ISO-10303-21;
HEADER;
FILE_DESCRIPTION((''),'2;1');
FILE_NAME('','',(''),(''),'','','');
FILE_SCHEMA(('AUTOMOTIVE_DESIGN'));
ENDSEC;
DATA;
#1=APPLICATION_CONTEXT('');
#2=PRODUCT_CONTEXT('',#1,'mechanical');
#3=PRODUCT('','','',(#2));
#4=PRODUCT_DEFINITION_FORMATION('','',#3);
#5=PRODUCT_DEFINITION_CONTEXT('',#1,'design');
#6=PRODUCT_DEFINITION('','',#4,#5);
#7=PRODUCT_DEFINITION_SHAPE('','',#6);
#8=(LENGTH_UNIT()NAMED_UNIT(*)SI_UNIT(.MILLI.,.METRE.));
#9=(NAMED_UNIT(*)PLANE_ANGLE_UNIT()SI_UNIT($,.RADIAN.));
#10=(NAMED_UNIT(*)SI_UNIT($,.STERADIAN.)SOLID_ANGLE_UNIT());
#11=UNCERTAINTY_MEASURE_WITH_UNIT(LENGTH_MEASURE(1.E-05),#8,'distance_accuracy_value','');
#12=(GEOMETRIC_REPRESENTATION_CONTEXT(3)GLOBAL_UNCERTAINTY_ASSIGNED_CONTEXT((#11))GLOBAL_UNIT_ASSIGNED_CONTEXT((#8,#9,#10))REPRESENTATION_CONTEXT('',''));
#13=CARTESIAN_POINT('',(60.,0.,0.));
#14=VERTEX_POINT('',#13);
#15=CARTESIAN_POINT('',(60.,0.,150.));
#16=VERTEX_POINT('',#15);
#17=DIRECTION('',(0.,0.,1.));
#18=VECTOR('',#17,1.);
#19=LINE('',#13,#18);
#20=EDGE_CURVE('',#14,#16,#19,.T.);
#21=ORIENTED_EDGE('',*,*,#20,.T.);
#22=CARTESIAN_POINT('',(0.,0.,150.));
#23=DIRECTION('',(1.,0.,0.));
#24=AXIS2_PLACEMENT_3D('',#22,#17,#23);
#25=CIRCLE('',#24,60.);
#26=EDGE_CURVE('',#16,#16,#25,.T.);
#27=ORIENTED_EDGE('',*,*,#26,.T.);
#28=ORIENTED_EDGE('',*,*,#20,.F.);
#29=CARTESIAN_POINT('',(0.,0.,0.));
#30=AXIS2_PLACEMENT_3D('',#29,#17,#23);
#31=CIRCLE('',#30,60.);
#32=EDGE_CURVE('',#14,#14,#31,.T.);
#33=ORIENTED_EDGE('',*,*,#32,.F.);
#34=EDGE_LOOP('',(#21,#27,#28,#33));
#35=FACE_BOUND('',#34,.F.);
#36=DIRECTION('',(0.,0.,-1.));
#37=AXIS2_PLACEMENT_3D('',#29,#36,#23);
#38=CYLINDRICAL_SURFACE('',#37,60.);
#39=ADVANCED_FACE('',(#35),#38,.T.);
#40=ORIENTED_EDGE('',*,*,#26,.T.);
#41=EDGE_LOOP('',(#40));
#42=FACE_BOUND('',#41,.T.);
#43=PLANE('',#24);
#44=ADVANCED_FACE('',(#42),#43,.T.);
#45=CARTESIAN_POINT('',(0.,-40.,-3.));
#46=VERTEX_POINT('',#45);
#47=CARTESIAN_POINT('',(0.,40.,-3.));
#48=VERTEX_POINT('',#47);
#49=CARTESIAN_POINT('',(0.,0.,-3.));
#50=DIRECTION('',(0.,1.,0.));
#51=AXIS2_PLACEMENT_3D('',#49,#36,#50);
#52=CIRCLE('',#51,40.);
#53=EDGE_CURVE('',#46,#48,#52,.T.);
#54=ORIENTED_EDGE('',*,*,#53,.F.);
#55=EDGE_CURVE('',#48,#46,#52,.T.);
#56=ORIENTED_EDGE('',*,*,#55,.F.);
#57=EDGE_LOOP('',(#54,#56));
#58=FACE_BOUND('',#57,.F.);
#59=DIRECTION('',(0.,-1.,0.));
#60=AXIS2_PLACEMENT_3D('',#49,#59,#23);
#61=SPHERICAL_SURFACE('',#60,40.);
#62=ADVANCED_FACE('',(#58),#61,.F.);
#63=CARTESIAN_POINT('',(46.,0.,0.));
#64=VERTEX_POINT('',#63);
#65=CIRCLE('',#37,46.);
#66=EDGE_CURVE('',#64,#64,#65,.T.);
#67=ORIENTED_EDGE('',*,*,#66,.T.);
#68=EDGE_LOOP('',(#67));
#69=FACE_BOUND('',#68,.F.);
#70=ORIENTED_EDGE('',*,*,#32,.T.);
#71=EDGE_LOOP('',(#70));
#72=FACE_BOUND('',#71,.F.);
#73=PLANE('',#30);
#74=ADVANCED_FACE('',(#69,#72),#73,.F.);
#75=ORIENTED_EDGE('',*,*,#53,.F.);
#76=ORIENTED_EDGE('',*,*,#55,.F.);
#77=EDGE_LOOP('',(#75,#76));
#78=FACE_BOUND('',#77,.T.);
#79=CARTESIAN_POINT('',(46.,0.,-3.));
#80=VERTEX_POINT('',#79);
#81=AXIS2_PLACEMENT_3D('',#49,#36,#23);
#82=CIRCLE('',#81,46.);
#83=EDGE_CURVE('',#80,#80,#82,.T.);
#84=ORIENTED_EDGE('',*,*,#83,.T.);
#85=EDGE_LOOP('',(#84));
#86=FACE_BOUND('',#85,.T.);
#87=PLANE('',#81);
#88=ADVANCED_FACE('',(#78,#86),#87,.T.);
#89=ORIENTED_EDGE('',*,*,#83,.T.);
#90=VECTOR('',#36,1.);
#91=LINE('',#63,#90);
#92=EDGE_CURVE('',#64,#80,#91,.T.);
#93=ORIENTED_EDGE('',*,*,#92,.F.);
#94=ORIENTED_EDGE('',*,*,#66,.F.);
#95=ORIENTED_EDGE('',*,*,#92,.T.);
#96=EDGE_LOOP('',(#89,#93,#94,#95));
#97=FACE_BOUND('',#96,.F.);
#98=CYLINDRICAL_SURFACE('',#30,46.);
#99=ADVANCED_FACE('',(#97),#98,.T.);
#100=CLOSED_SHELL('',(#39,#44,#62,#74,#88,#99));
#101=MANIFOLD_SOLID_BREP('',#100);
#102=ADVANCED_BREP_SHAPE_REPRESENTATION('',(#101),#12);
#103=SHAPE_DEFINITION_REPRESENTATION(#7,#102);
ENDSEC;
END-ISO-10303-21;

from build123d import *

# Parameters (mm, degrees)
F0_R     = 60
F1_DEPTH = 150
F2_R     = 46
F3_DEPTH = 3


# Not quite as in the source:
# - a feature names something its author has since deleted; it is built from what else it names


with BuildPart() as f1:
    # F0 (on Top) → F1 (new body)
    with BuildSketch(Plane.XY):
        Circle(F0_R)
    extrude(amount=F1_DEPTH)

    # F2 (on face) → F3 (join)
    with BuildSketch(Plane(origin=(0, 0, 0), x_dir=(1, 0, 0), z_dir=(0, 0, -1))):
        Circle(F2_R)
    extrude(amount=F3_DEPTH)

    # F4 (on face) → F5 (revolve, cut)
    with BuildSketch(Plane(origin=(0, 0, -3), x_dir=(1, 0, 0), z_dir=(0, 0, -1))):
        with BuildLine():
            Line((0, 40), (0, -40))
            ThreePointArc((0, -40), (40, 0), (0, 40))
        make_face()
    revolve(axis=Axis((0, 0, -3), (0, -1, 0)), mode=Mode.SUBTRACT)


solid = f1.part
